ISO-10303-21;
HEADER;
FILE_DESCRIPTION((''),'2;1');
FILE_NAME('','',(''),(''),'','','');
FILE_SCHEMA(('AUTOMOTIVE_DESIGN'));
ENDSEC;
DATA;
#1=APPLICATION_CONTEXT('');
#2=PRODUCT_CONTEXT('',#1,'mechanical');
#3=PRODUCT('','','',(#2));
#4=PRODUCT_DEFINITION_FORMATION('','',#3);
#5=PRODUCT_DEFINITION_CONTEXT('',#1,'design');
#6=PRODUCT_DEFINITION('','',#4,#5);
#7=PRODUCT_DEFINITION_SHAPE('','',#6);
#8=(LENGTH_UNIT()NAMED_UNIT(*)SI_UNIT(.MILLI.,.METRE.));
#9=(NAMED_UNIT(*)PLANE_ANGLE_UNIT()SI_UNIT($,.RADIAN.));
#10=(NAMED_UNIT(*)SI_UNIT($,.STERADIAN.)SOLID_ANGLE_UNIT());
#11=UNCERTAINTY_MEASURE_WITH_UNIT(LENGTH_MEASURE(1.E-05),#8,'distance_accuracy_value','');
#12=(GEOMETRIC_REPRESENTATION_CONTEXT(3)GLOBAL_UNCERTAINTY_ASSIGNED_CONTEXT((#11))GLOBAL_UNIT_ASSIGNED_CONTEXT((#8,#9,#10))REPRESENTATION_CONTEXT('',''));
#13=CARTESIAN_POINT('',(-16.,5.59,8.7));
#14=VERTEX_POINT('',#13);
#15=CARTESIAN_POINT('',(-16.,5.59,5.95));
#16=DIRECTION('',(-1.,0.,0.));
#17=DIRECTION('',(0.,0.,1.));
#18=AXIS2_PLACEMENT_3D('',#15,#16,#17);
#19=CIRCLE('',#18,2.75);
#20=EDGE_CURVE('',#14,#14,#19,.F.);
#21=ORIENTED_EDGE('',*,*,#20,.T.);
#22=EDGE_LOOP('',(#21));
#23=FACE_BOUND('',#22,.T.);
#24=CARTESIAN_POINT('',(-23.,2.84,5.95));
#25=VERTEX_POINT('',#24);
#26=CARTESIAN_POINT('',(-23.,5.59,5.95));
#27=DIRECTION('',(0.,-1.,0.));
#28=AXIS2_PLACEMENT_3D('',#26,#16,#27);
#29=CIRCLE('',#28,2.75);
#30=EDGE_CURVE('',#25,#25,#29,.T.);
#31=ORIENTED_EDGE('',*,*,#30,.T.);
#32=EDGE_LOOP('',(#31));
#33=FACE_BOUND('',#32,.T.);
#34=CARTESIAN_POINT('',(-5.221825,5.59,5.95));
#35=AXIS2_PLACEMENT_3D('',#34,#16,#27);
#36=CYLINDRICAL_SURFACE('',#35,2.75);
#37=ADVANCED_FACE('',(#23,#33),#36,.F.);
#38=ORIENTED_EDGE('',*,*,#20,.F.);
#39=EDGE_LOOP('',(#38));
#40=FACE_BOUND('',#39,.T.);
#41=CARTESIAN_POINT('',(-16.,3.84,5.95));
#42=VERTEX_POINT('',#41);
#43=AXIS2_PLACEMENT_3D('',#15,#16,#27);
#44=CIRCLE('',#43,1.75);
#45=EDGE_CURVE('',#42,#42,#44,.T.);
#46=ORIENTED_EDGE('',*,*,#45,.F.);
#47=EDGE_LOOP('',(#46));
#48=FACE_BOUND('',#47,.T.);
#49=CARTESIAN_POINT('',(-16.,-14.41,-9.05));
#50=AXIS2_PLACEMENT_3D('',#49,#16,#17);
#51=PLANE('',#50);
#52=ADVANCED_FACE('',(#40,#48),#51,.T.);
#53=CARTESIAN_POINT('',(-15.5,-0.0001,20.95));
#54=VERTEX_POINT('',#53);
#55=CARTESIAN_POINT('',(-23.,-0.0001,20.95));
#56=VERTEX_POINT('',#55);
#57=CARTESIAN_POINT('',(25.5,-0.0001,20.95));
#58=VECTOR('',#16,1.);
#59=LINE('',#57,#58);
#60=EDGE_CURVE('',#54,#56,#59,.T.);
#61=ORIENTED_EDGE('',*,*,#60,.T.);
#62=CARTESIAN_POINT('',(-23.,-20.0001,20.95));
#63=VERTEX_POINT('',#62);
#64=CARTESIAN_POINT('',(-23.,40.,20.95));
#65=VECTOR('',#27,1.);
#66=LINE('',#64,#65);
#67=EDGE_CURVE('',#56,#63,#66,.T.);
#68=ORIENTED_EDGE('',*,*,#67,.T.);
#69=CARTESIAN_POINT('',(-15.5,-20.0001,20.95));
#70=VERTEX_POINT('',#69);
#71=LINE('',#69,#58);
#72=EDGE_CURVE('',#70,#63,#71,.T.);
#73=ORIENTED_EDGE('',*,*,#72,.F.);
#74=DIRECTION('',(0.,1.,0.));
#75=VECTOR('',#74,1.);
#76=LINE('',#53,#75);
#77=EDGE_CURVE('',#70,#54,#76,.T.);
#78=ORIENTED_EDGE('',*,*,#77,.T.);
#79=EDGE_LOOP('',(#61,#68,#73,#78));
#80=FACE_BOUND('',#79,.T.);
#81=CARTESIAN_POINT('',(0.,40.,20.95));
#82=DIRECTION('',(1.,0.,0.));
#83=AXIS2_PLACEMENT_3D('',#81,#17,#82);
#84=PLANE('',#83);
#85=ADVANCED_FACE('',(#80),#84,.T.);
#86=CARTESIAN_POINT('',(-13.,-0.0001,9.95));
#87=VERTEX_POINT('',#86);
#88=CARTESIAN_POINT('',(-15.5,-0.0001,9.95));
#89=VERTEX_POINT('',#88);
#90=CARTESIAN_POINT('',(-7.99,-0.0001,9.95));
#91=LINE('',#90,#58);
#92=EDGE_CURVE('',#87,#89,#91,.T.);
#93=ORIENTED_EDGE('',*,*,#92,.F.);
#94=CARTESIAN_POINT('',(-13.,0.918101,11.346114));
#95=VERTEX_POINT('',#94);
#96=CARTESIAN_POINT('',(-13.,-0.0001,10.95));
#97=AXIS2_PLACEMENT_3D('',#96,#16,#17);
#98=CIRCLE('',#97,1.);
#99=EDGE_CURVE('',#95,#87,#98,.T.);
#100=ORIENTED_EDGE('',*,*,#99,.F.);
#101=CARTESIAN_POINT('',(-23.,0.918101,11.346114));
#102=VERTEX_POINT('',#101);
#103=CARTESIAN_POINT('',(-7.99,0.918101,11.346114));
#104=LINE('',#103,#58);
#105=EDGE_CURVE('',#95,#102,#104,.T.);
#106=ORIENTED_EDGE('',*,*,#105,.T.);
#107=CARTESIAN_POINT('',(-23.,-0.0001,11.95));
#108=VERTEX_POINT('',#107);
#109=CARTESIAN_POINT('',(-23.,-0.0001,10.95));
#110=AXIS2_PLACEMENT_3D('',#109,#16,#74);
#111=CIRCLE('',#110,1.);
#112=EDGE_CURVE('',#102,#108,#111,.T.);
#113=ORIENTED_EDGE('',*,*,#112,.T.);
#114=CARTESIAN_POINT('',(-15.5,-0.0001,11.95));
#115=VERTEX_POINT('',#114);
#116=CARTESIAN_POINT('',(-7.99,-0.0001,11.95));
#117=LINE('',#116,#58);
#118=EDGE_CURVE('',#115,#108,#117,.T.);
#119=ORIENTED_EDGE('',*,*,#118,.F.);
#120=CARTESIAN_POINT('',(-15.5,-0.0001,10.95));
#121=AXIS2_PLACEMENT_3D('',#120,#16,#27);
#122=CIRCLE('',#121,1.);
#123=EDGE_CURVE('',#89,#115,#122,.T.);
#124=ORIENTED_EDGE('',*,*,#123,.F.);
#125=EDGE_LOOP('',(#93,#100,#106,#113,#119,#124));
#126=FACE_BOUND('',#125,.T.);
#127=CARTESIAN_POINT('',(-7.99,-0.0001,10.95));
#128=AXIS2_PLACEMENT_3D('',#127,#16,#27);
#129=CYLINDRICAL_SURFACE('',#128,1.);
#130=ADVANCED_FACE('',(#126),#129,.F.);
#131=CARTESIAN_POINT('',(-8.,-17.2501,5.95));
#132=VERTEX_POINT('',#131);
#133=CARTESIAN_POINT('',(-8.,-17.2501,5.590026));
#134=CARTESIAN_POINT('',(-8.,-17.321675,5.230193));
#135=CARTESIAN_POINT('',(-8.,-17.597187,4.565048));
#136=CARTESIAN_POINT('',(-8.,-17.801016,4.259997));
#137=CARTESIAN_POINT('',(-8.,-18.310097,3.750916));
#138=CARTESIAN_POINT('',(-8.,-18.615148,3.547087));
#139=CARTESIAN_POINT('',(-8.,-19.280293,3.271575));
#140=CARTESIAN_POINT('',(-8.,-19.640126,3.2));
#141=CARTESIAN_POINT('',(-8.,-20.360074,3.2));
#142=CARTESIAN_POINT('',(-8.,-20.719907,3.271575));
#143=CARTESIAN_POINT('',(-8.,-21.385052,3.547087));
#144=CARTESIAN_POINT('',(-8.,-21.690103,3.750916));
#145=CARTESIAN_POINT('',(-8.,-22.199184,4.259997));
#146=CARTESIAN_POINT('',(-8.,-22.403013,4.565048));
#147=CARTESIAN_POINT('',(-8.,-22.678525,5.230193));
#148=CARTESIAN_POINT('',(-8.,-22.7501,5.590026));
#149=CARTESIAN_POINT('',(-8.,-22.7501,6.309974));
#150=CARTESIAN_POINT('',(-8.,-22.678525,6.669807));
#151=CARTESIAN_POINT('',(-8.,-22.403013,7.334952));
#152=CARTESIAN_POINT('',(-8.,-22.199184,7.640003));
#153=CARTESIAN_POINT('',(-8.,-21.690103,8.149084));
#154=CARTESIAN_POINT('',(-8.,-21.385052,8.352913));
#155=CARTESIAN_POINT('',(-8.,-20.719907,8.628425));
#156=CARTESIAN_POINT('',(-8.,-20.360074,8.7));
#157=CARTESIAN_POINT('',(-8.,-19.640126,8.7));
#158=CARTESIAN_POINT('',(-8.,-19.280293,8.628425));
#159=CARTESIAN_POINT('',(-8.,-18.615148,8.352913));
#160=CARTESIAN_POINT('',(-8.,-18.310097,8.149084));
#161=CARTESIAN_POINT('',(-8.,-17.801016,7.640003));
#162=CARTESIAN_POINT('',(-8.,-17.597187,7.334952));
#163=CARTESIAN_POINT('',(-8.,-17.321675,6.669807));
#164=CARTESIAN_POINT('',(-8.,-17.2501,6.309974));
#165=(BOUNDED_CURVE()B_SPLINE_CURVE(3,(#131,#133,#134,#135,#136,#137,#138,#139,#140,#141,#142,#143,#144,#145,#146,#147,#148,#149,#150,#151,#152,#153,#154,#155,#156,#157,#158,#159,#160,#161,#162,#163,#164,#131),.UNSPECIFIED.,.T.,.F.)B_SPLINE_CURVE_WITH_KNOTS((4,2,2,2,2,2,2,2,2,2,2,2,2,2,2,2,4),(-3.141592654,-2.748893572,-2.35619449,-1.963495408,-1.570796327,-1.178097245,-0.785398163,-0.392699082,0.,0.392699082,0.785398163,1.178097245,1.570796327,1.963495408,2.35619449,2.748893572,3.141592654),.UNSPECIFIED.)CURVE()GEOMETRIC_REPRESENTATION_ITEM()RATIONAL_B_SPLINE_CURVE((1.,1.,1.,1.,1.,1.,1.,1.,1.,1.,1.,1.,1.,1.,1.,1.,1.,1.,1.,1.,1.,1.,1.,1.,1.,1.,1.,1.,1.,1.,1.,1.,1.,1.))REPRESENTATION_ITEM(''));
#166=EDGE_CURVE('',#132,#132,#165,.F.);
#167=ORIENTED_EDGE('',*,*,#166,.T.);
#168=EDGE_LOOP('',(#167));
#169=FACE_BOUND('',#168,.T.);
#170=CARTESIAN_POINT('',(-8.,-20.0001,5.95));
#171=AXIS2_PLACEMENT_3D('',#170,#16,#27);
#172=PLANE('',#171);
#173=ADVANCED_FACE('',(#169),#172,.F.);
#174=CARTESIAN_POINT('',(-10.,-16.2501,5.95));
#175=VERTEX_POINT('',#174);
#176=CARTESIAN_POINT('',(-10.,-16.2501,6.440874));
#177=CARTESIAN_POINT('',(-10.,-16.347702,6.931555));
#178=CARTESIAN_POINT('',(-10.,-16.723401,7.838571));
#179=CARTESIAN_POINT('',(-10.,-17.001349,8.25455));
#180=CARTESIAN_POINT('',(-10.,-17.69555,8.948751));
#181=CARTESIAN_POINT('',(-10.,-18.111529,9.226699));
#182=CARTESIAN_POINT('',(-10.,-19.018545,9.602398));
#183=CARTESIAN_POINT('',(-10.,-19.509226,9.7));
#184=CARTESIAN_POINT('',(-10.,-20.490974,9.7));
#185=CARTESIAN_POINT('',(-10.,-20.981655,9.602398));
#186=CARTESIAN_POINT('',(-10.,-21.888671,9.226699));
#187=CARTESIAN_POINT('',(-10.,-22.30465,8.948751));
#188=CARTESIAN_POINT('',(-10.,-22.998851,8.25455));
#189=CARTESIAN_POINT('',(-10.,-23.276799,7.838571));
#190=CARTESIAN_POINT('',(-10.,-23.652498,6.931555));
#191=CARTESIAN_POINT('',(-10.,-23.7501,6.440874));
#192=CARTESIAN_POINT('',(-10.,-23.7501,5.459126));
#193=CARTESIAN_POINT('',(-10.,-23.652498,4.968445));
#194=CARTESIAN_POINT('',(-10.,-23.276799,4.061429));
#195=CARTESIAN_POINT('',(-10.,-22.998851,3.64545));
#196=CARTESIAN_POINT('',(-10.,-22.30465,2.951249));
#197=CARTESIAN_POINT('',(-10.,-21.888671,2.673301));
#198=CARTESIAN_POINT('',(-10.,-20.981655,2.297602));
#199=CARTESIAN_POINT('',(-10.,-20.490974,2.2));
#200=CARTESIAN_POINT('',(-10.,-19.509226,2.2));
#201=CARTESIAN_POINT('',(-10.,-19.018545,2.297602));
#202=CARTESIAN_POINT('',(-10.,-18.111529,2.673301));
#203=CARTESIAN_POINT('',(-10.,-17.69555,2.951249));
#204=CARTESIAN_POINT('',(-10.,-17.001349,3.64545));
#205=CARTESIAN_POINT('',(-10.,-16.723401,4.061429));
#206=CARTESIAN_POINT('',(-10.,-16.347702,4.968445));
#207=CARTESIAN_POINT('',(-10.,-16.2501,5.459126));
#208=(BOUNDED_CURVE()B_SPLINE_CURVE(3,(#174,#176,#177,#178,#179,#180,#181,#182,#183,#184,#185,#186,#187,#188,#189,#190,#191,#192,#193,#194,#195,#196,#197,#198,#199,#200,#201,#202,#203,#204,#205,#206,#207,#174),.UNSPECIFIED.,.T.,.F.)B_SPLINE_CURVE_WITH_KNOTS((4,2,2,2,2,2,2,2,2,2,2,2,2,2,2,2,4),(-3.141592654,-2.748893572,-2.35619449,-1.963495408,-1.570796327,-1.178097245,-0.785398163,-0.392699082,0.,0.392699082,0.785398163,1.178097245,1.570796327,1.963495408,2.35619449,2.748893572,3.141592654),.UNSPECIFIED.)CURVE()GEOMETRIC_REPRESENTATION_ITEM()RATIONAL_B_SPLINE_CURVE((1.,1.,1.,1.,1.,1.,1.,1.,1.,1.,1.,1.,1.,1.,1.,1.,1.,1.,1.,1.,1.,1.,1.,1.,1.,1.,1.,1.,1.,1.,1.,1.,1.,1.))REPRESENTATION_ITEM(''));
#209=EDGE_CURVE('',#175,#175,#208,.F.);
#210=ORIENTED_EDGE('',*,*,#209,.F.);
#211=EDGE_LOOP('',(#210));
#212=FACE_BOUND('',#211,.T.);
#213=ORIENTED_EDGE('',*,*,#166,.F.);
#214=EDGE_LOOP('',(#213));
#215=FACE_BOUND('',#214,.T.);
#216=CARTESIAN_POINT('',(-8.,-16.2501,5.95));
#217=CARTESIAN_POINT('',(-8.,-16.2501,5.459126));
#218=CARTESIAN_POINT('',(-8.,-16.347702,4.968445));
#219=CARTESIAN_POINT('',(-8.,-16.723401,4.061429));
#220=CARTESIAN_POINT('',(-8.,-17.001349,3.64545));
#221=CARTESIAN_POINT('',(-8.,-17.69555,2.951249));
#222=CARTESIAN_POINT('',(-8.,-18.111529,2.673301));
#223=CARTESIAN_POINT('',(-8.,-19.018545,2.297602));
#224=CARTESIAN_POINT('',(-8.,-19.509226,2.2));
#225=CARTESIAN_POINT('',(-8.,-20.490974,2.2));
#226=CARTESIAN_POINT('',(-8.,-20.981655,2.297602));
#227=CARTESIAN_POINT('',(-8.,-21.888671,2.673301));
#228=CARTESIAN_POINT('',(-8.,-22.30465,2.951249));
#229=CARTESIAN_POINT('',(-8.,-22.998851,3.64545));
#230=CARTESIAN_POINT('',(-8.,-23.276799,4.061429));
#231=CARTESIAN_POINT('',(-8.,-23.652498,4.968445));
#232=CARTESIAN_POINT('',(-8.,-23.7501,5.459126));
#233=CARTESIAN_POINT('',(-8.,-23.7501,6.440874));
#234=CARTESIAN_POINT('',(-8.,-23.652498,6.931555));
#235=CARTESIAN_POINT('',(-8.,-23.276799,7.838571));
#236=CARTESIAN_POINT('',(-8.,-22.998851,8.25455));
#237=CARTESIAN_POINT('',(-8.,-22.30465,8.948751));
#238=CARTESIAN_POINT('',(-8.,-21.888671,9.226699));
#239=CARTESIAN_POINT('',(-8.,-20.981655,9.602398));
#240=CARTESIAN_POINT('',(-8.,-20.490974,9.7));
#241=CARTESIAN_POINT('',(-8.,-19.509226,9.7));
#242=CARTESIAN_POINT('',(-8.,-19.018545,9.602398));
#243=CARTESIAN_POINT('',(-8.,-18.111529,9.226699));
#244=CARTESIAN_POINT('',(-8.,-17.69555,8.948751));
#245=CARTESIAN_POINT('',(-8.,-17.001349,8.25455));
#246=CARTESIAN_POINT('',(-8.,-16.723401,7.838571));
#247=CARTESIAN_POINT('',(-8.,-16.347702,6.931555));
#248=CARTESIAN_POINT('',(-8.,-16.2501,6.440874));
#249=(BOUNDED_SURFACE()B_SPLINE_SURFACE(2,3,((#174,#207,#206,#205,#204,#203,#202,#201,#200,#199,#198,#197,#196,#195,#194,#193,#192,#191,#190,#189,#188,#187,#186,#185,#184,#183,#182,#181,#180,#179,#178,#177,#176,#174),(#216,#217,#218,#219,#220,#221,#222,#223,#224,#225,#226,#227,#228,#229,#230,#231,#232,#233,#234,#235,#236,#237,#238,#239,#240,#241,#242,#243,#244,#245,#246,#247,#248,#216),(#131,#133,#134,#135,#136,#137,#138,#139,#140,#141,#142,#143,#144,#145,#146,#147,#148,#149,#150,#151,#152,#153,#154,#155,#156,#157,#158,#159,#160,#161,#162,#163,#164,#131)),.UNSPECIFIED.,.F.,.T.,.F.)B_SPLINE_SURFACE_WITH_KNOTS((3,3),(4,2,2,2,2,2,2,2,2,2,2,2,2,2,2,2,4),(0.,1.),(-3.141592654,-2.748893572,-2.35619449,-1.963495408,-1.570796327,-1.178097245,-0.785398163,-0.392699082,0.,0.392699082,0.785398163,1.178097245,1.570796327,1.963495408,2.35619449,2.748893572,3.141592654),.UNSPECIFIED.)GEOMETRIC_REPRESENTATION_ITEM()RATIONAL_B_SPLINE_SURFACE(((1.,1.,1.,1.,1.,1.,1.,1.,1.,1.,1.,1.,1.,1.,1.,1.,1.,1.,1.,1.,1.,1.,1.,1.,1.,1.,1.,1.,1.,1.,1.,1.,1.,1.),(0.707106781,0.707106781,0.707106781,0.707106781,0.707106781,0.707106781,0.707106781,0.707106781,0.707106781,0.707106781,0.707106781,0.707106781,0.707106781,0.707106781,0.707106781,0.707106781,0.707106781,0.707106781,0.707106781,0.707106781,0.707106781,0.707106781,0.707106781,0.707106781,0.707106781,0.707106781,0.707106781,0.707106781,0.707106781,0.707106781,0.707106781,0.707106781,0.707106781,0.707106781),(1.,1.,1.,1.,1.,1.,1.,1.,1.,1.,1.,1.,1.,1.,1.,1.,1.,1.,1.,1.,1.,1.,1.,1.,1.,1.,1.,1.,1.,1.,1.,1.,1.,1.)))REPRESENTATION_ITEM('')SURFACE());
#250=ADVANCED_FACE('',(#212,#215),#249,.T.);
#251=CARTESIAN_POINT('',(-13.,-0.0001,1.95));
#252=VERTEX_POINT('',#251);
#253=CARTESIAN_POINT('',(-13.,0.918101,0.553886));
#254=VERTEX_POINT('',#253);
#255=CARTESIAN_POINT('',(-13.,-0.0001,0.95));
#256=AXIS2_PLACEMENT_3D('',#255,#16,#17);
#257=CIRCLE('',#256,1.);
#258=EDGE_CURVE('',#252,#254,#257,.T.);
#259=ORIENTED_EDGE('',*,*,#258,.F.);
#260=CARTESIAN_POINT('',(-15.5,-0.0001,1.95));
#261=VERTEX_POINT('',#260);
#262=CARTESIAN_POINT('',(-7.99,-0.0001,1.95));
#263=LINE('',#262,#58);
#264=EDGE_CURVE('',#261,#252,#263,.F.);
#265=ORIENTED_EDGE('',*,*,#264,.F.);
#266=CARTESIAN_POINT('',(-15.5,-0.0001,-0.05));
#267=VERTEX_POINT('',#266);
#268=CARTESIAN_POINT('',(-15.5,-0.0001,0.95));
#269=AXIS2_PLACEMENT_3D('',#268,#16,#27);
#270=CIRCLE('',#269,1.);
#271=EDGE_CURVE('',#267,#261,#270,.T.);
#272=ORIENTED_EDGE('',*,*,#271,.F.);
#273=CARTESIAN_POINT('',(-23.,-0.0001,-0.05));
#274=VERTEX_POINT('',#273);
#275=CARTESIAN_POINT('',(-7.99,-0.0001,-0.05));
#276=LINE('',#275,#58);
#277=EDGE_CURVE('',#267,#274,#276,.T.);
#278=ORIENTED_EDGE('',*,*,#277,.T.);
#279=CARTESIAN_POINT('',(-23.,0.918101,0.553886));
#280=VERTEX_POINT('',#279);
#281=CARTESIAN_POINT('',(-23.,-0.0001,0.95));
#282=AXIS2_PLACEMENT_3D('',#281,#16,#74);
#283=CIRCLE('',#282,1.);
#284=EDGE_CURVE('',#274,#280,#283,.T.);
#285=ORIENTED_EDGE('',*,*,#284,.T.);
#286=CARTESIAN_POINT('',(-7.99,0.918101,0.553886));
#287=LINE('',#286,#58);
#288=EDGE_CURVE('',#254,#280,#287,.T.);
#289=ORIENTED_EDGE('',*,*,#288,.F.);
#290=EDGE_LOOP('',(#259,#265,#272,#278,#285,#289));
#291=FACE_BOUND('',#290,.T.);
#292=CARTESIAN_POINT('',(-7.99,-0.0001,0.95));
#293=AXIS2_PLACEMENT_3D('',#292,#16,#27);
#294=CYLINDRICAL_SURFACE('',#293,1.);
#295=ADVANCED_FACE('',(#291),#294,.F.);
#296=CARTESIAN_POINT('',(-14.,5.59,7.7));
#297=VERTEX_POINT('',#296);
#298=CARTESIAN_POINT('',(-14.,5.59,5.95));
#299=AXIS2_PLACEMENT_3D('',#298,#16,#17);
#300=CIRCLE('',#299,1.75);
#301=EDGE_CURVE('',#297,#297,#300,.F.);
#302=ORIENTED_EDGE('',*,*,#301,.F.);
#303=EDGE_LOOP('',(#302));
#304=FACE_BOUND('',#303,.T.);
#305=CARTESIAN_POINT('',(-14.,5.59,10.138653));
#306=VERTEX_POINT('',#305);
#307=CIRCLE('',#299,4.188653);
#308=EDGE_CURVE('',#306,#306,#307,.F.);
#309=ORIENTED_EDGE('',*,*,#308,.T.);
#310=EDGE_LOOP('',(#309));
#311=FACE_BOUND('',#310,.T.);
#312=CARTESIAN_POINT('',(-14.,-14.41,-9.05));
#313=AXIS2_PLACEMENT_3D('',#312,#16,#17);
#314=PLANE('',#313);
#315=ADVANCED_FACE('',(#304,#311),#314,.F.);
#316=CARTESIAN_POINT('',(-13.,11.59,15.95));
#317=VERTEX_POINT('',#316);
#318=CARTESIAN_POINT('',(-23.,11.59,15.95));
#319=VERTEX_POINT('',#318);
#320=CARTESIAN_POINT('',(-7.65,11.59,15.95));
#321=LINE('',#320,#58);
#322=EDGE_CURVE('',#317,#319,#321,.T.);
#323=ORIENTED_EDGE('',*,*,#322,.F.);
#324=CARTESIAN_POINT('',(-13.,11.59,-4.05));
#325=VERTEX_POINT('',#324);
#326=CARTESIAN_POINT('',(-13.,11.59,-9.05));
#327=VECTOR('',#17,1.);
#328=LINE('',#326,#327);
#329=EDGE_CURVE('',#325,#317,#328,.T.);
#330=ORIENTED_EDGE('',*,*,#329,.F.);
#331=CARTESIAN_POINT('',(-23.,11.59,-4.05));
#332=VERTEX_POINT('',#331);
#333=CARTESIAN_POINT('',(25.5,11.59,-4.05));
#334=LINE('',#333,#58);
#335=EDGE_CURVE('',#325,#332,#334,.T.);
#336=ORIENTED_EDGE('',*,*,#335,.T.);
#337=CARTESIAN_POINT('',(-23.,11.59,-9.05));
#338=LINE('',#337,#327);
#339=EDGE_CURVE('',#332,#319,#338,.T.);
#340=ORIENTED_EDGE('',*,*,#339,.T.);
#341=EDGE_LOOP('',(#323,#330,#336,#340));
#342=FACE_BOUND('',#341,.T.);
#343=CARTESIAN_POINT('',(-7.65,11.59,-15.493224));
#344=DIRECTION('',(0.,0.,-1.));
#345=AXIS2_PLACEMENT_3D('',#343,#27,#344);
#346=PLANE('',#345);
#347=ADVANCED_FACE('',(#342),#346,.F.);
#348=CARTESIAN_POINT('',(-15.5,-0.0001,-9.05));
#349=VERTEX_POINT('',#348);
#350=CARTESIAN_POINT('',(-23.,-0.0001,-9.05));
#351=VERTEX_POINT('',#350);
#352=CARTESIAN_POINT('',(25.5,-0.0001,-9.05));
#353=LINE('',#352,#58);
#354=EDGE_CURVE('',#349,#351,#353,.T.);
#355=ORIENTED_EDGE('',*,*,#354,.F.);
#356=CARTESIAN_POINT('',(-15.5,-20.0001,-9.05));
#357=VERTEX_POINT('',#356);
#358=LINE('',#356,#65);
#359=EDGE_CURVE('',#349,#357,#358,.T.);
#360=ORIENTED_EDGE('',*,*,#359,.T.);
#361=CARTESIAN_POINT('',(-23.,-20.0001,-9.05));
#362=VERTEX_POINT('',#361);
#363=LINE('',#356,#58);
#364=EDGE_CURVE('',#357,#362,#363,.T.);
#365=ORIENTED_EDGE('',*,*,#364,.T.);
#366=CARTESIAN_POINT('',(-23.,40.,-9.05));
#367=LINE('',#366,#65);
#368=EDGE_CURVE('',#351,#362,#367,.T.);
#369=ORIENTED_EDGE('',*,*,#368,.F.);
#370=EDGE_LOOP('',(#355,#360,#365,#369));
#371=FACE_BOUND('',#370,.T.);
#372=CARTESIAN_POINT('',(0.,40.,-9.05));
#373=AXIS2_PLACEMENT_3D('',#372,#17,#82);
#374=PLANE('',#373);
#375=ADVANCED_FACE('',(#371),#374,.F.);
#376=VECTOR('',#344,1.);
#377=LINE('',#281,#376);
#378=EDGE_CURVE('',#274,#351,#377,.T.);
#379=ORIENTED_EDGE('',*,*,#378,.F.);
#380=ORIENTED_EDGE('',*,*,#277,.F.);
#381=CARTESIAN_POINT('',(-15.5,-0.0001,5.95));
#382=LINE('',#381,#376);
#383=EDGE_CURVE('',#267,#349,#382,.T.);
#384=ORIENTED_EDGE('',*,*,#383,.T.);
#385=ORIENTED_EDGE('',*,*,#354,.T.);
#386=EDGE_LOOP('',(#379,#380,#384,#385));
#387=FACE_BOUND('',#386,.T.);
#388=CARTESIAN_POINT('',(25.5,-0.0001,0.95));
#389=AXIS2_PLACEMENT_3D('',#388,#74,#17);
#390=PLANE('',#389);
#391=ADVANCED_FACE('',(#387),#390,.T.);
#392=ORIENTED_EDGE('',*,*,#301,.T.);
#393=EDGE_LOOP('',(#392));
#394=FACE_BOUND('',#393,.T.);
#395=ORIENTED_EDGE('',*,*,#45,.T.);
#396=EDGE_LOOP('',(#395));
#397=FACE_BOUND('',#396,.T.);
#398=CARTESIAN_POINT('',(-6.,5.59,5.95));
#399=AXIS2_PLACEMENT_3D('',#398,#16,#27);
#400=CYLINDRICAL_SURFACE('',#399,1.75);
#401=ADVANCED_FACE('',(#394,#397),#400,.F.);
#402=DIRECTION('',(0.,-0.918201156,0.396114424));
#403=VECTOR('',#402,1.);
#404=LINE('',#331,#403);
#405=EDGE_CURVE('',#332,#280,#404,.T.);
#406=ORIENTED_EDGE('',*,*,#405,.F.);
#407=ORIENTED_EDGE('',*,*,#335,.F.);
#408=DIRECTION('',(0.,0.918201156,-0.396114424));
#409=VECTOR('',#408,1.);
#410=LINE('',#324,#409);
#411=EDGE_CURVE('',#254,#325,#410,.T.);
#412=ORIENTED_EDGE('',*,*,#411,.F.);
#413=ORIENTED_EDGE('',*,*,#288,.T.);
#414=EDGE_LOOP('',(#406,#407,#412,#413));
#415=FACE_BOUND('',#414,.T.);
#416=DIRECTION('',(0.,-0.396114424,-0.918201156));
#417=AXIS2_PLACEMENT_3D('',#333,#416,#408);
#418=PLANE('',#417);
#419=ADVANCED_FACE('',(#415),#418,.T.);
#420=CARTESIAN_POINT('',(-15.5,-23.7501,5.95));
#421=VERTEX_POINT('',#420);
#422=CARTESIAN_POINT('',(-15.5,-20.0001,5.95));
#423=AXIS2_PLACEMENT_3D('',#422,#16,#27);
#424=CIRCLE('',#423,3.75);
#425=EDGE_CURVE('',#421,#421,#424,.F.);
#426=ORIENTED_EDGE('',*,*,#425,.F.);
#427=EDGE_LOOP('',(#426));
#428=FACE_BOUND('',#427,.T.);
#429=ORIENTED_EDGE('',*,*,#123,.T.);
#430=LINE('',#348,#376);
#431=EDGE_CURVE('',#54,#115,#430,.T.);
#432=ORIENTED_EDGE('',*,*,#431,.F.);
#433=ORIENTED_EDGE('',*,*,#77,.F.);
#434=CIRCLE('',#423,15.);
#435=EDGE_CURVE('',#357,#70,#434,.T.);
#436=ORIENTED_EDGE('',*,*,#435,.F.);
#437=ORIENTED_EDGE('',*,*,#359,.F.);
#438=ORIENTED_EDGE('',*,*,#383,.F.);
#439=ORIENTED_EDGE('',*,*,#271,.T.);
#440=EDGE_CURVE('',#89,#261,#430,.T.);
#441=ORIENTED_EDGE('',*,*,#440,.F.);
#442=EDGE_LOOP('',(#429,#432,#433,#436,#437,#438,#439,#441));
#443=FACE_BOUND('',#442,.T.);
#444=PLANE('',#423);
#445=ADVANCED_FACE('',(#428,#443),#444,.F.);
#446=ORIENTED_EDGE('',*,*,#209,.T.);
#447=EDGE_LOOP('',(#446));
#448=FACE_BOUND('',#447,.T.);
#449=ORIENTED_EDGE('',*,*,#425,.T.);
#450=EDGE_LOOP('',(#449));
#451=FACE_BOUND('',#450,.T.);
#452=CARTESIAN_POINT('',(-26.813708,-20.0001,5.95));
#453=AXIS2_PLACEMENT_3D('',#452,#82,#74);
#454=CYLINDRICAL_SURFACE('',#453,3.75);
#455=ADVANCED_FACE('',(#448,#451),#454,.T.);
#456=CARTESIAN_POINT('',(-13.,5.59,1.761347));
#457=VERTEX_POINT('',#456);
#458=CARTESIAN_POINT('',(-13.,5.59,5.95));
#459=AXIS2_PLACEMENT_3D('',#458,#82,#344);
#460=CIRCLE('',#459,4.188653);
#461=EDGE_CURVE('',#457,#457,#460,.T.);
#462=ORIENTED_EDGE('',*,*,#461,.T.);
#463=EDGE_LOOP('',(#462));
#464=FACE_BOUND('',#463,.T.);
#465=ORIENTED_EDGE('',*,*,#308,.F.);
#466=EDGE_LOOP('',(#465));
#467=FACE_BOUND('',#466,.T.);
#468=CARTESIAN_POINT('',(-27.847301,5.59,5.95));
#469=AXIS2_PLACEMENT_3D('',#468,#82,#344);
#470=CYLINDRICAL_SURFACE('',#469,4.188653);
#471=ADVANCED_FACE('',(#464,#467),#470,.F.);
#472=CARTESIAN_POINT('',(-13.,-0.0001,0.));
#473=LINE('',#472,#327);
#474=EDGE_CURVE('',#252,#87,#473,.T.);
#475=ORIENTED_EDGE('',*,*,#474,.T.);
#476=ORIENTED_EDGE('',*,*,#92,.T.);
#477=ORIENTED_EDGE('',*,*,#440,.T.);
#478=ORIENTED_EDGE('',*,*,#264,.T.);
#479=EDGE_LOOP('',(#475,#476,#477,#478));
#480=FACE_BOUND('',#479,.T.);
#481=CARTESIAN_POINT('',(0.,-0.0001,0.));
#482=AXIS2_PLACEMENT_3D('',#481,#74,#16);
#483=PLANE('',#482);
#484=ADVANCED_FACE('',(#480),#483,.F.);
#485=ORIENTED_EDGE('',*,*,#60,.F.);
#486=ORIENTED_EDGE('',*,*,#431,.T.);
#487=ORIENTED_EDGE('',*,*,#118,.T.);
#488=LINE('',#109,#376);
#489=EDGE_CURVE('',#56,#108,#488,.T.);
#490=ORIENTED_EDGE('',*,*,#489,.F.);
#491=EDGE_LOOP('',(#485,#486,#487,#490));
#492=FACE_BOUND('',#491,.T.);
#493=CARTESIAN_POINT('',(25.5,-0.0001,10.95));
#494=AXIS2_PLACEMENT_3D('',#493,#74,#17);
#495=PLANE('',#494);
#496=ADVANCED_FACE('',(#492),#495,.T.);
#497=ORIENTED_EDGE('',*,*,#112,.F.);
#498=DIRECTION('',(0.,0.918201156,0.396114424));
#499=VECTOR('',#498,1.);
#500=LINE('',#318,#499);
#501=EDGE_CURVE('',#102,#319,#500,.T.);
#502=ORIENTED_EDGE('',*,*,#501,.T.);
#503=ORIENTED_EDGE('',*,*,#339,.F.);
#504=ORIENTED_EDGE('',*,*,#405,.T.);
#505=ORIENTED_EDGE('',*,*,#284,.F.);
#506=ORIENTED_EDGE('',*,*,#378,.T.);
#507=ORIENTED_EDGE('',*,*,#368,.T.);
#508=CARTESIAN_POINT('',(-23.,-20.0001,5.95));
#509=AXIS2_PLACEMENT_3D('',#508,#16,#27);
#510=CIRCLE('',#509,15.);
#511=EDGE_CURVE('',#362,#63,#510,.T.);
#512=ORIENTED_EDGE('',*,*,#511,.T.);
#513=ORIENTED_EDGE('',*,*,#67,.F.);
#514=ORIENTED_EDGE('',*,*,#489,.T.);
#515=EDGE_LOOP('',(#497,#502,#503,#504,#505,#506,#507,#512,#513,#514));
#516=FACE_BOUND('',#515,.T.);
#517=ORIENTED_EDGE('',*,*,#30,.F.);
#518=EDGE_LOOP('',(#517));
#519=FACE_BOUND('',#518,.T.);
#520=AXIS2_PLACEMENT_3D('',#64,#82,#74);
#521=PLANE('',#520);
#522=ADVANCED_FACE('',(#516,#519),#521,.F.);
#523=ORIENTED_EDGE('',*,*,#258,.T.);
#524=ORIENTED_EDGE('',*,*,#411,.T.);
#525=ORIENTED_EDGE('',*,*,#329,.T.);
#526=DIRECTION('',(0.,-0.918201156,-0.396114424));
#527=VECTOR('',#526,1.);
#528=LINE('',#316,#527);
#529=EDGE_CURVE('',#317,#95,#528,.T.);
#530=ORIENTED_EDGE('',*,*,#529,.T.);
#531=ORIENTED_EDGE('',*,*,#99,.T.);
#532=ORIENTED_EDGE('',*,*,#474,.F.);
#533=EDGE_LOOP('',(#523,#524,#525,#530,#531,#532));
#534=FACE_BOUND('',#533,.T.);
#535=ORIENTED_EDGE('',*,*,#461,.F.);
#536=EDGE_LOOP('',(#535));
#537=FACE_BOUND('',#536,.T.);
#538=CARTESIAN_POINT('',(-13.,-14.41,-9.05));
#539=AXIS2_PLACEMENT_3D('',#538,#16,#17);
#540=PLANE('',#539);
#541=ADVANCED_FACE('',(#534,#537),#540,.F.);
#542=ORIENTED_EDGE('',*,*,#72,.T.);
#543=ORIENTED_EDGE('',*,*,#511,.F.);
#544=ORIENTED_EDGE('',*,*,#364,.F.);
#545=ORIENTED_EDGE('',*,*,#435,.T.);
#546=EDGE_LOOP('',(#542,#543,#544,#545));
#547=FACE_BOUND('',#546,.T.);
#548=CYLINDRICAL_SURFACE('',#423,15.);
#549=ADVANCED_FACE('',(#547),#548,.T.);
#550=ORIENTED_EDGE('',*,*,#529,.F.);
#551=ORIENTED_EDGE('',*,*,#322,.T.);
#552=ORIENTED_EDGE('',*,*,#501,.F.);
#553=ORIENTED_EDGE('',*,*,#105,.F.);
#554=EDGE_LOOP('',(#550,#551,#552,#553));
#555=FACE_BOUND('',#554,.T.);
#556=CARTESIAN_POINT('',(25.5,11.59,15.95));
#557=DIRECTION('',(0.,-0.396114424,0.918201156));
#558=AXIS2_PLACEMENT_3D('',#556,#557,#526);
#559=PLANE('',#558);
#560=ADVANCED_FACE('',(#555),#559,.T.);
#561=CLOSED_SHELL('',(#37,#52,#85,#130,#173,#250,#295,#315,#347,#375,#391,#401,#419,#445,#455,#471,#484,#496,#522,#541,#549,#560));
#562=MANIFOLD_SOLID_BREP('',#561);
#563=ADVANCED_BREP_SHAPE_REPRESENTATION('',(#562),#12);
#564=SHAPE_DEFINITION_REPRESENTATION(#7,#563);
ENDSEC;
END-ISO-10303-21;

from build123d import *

# Parameters (mm, degrees)
BOSS_EXTRUDE1_DEPTH     = 20.95
BOSS_EXTRUDE2_START     = -9.05
BOSS_EXTRUDE2_DEPTH     = 9.05
SKETCH6_R               = 2
CUT_EXTRUDE2_DEPTH      = 10
CUT_EXTRUDE3_DEPTH      = 2.75
CUT_EXTRUDE4_DEPTH      = 67.499081444
CUT_EXTRUDE4_DEPTH_BACK = 67.499081444
SKETCH8_W               = 8.290514233
SKETCH8_H               = 3.25
SKETCH11_R              = 11.15
BEARING_HOLE_DEPTH      = 7.3
SKETCH9_W               = 12.3
SKETCH9_H               = 21.5
WIRE_HOLE_DEPTH         = 62.274898109
SKETCH12_W              = 46
SKETCH12_H              = 30
BOSS_EXTRUDE3_DEPTH     = 0.0001
BOSS_EXTRUDE4_DEPTH     = 7.5
BOSS_EXTRUDE5_START     = -7.5
BOSS_EXTRUDE5_DEPTH     = 7.5
BOSS_EXTRUDE9_START     = 2.5
BOSS_EXTRUDE9_DEPTH     = 2.5
SKETCH15_R              = 4
CUT_EXTRUDE5_DEPTH      = 77.054456365
SKETCH17_R              = 6.169612062
BOSS_EXTRUDE6_DEPTH     = 10
SKETCH18_R              = 4
KNUB_DEPTH              = 15
SKETCH19_R              = 4.675
CUT_EXTRUDE6_DEPTH      = 2
SKETCH24_R              = 4.5
CUT_EXTRUDE7_DEPTH      = 65.487733972
FILLET1_R               = 0.5
SKETCH25_W              = 8.843315878
SKETCH25_H              = 4.834346013
BOSS_EXTRUDE10_DEPTH    = 2
SKETCH27_W              = 12.3
SKETCH27_H              = 21.5
CUT_EXTRUDE8_DEPTH      = 60.56786481
BOSS_EXTRUDE11_DEPTH    = 14.5901
CUT_EXTRUDE9_REACH      = 69.405
SKETCH29_W              = 15.2
SKETCH29_H              = 3
SKETCH30_W              = 30
SKETCH30_H              = 43.119485767
CUT_EXTRUDE10_DEPTH     = 77.054456365
SKETCH31_W              = 44.37652795
SKETCH31_H              = 54.474735771
CUT_EXTRUDE12_DEPTH     = 64.373176502
SKETCH32_W              = 38.5
SKETCH32_H              = 30
CUT_EXTRUDE13_DEPTH     = 26
SKETCH39_W              = 19.135999949
SKETCH39_H              = 39.276229487
CUT_EXTRUDE18_DEPTH     = 43.013717998
SKETCH33_R              = 2.75
CUT_EXTRUDE14_DEPTH     = 7
SKETCH34_R              = 1.75
CUT_EXTRUDE15_DEPTH     = 10
SKETCH37_R              = 4.188653381
CUT_EXTRUDE17_DEPTH     = 1
SKETCH40_R              = 4
SKETCH40_R_2            = 3.75
CUT_EXTRUDE19_DEPTH     = 7.5
FILLET4_SIZE            = 2
FILLET4_SIZE_2          = 1
CUT_EXTRUDE20_DEPTH     = 44.461586522


with BuildPart() as part:
    # Sketch2 → Boss-Extrude1 (new body)
    with BuildSketch(Plane.XY):
        with BuildLine():
            Line((-14.709485767, 40), (-23, 40))
            Line((-23, 40), (-23, 0))
            Line((-23, 0), (23, 0))
            Line((23, 0), (23, 40))
            Line((23, 40), (14.709485767, 40))
            ThreePointArc((14.709485767, 40), (0, 54.709485767), (-14.709485767, 40))
        make_face()
        with BuildLine():
            Line((-7.65, 18.18111404), (-7.65, 14.59))
            Line((-7.65, 14.59), (7.65, 14.59))
            Line((7.65, 14.59), (7.65, 18.18111404))
            Line((7.65, 18.18111404), (9.45, 18.18111404))
            Line((9.45, 18.18111404), (9.45, 21.20025831))
            ThreePointArc((9.45, 21.20025831), (0, 46.349332344), (-9.45, 21.20025831))
            Line((-9.45, 21.20025831), (-9.45, 18.18111404))
            Line((-9.45, 18.18111404), (-7.65, 18.18111404))
        make_face(mode=Mode.SUBTRACT)
    extrude(amount=BOSS_EXTRUDE1_DEPTH)

    # Sketch3 → Boss-Extrude2 (add)
    with BuildSketch(Plane.XY.offset(BOSS_EXTRUDE2_START)):
        with BuildLine():
            Line((-14.709485767, 40), (-23, 40))
            Line((-23, 40), (-23, 0))
            Line((-23, 0), (23, 0))
            Line((23, 0), (23, 40))
            Line((23, 40), (14.709485767, 40))
            ThreePointArc((14.709485767, 40), (0, 54.709485767), (-14.709485767, 40))
        make_face()
    extrude(amount=BOSS_EXTRUDE2_DEPTH)

    # Sketch6 → Cut-Extrude2 (cut)
    with BuildSketch(Plane.XY.offset(20.95)):
        with Locations((-17.5, 32)):
            Circle(SKETCH6_R)
        with Locations((17.5, 32)):
            Circle(SKETCH6_R)
    extrude(amount=-CUT_EXTRUDE2_DEPTH, mode=Mode.SUBTRACT)

    # Sketch7 → Cut-Extrude3 (cut)
    with BuildSketch(Plane.XY.offset(20.95)):
        with BuildLine():
            Line((-17.5, 35.75), (17.5, 35.75))
            ThreePointArc((17.5, 35.75), (21.25, 32), (17.5, 28.25))
            Line((17.5, 28.25), (-17.5, 28.25))
            ThreePointArc((-17.5, 28.25), (-21.25, 32), (-17.5, 35.75))
        make_face()
    extrude(amount=-CUT_EXTRUDE3_DEPTH, mode=Mode.SUBTRACT)

    # Sketch8 → Cut-Extrude4 (cut, two sides: drawn at the far end of the back side and taken through both)
    with BuildSketch(Plane.XY.offset(20.95).offset(-CUT_EXTRUDE4_DEPTH_BACK)):
        with Locations((-18.854742884, 38.375)):
            Rectangle(SKETCH8_W, SKETCH8_H)
        with Locations((18.854742884, 38.375)):
            Rectangle(SKETCH8_W, SKETCH8_H)
    extrude(amount=CUT_EXTRUDE4_DEPTH + CUT_EXTRUDE4_DEPTH_BACK, mode=Mode.SUBTRACT)

    # Sketch11 → Bearing Hole (cut)
    with BuildSketch(Plane(origin=(0, 0, -9.05), x_dir=(-1, 0, 0), z_dir=(0, 0, -1))):
        with Locations((0, 40)):
            Circle(SKETCH11_R)
    extrude(amount=-BEARING_HOLE_DEPTH, mode=Mode.SUBTRACT)

    # Sketch9 → Wire Hole (cut, through all)
    with BuildSketch(Plane(origin=(0, 14.59, -19.25), x_dir=(-1, 0, 0), z_dir=(0, 1, 0))):
        with Locations((0, 26.95)):
            Rectangle(SKETCH9_W, SKETCH9_H)
    extrude(amount=-WIRE_HOLE_DEPTH, mode=Mode.SUBTRACT)

    # Sketch12 → Boss-Extrude3 (add)
    with BuildSketch(Plane.XZ):
        with Locations((0, 5.95)):
            Rectangle(SKETCH12_W, SKETCH12_H)
    extrude(amount=BOSS_EXTRUDE3_DEPTH)

    # Sketch13 → Boss-Extrude4 (add)
    with BuildSketch(Plane(origin=(23, 0, 0), x_dir=(0, 0, -1), z_dir=(1, 0, 0))):
        with BuildLine():
            Line((-20.95, -0.0001), (-20.95, -20.0001))
            ThreePointArc((-20.95, -20.0001), (-5.95, -35.0001), (9.05, -20.0001))
            Line((9.05, -20.0001), (9.05, -0.0001))
            Line((9.05, -0.0001), (-20.95, -0.0001))
        make_face()
    extrude(amount=-BOSS_EXTRUDE4_DEPTH)

    # Sketch14 → Boss-Extrude5 (add)
    with BuildSketch(Plane.ZY.offset(23).offset(BOSS_EXTRUDE5_START)):
        with BuildLine():
            Line((-9.05, -20.0001), (-9.05, -0.0001))
            Line((-9.05, -0.0001), (20.95, -0.0001))
            Line((20.95, -0.0001), (20.95, -20.0001))
            ThreePointArc((20.95, -20.0001), (5.95, -35.0001), (-9.05, -20.0001))
        make_face()
    extrude(amount=BOSS_EXTRUDE5_DEPTH)

    # Sketch21 → Boss-Extrude9 (add)
    with BuildSketch(Plane(origin=(23, 0, 0), x_dir=(0, 0, -1), z_dir=(1, 0, 0)).offset(BOSS_EXTRUDE9_START)):
        with BuildLine():
            Line((-20.95, -20.0001), (-20.95, 36.75))
            Line((-20.95, 36.75), (9.05, 36.75))
            Line((9.05, 36.75), (9.05, -20.0001))
            ThreePointArc((9.05, -20.0001), (-5.95, -35.0001), (-20.95, -20.0001))
        make_face()
    extrude(amount=-BOSS_EXTRUDE9_DEPTH)

    # Sketch15 → Cut-Extrude5 (cut, through all)
    with BuildSketch(Plane.ZY.offset(23)):
        with Locations(Location((5.95, -20.0001, 0), (0, 0, 270))):
            Circle(SKETCH15_R)
    extrude(amount=-CUT_EXTRUDE5_DEPTH, mode=Mode.SUBTRACT)

    # Sketch17 → Boss-Extrude6 (add)
    with BuildSketch(Plane(origin=(25.5, 0, -23), x_dir=(0, 0, 1), z_dir=(-1, 0, 0))):
        with Locations((28.95, -20.0001)):
            Circle(SKETCH17_R)
        with BuildLine():
            Line((26.765394773, -18.5001), (31.134605227, -18.5001))
            ThreePointArc((31.134605227, -18.5001), (31.6, -20.0001), (31.134605227, -21.5001))
            Line((31.134605227, -21.5001), (26.765394773, -21.5001))
            ThreePointArc((26.765394773, -21.5001), (26.3, -20.0001), (26.765394773, -18.5001))
        make_face(mode=Mode.SUBTRACT)
    extrude(amount=BOSS_EXTRUDE6_DEPTH)

    # Sketch18 → Knub (add)
    with BuildSketch(Plane.ZY.offset(23)):
        with Locations(Location((5.95, -20.0001, 0), (0, 0, 270))):
            Circle(SKETCH18_R)
    extrude(amount=-KNUB_DEPTH)

    # Sketch19 → Cut-Extrude6 (cut)
    with BuildSketch(Plane.ZY.offset(-15.5)):
        with Locations((5.95, -20.0001)):
            Circle(SKETCH19_R)
    extrude(amount=-CUT_EXTRUDE6_DEPTH, mode=Mode.SUBTRACT)

    # Sketch24 → Cut-Extrude7 (cut, through all)
    with BuildSketch(Plane(origin=(0, 0, -1.75), x_dir=(-1, 0, 0), z_dir=(0, 0, -1))):
        with Locations((0, 40)):
            Circle(SKETCH24_R)
    extrude(amount=-CUT_EXTRUDE7_DEPTH, mode=Mode.SUBTRACT)

    # Fillet1
    fillet1_edges = [part.edges().sort_by_distance(p)[0] for p in [
        (11.15, 40, -9.05),
    ]]
    fillet(fillet1_edges, radius=FILLET1_R)

    # Sketch25 → Boss-Extrude10 (add)
    with BuildSketch(Plane(origin=(25.5, 0, 0), x_dir=(0, 0, -1), z_dir=(1, 0, 0))):
        with Locations((-6.185865257, -20.38943492)):
            Rectangle(SKETCH25_W, SKETCH25_H)
    extrude(amount=-BOSS_EXTRUDE10_DEPTH)

    # Sketch27 → Cut-Extrude8 (cut, through all)
    with BuildSketch(Plane(origin=(0, 14.59, 0), x_dir=(1, 0, 0), z_dir=(0, 1, 0))):
        with Locations((0, -7.7)):
            Rectangle(SKETCH27_W, SKETCH27_H)
    extrude(amount=-CUT_EXTRUDE8_DEPTH, mode=Mode.SUBTRACT)

    # Sketch28 → Boss-Extrude11 (add)
    with BuildSketch(Plane.XZ.offset(0.0001)):
        Polygon((-6.15, 7.7), (0, 17.95), (6.15, 7.7), (6.15, 18.45), (-6.15, 18.45), align=None)
    extrude(amount=-BOSS_EXTRUDE11_DEPTH)

    # Cut-Extrude9: up to this face of the body (flat: up to its plane)
    cut_extrude9_end = Plane(part.part.faces().sort_by_distance((0, 29.679084048, 0))[0])
    # Sketch29 → Cut-Extrude9 (cut, up to the picked face)
    with BuildSketch(Plane.XY.offset(20.95), mode=Mode.PRIVATE) as cut_extrude9_sk1:
        with Locations((-0.05, 13.09)):
            Rectangle(SKETCH29_W, SKETCH29_H)
    cut_extrude9_tool1 = split(extrude(cut_extrude9_sk1.sketch, amount=-CUT_EXTRUDE9_REACH, mode=Mode.PRIVATE), bisect_by=cut_extrude9_end, keep=Keep.BOTH, mode=Mode.PRIVATE)
    add(cut_extrude9_tool1.solids().sort_by(Axis((-0.05, 13.09, 20.95), (0, 0, -1)))[0], mode=Mode.SUBTRACT)

    # Sketch30 → Cut-Extrude10 (cut, through all)
    with BuildSketch(Plane.ZY.offset(23)):
        with Locations((5.95, 33.149742884)):
            Rectangle(SKETCH30_W, SKETCH30_H)
    extrude(amount=-CUT_EXTRUDE10_DEPTH, mode=Mode.SUBTRACT)

    # Sketch31 → Cut-Extrude12 (cut, through all)
    with BuildSketch(Plane.ZY.offset(23)):
        with Locations((5.76471192, -10.040592917)):
            Rectangle(SKETCH31_W, SKETCH31_H)
        with BuildLine():
            Line((-4.05, 11.59), (15.95, 11.59))
            Line((15.95, 11.59), (10.95, -0.0001))
            Line((10.95, -0.0001), (20.95, -0.0001))
            Line((20.95, -0.0001), (20.95, -20.0001))
            ThreePointArc((20.95, -20.0001), (5.95, -35.0001), (-9.05, -20.0001))
            Line((-9.05, -20.0001), (-9.05, -0.0001))
            Line((-9.05, -0.0001), (0.95, -0.0001))
            Line((0.95, -0.0001), (-4.05, 11.59))
        make_face(mode=Mode.SUBTRACT)
    extrude(amount=-CUT_EXTRUDE12_DEPTH, mode=Mode.SUBTRACT)

    # Sketch32 → Cut-Extrude13 (cut)
    with BuildSketch(Plane(origin=(0, 11.59, 0), x_dir=(1, 0, 0), z_dir=(0, 1, 0))):
        with Locations((6.25, -5.95)):
            Rectangle(SKETCH32_W, SKETCH32_H)
    extrude(amount=-CUT_EXTRUDE13_DEPTH, mode=Mode.SUBTRACT)


with BuildPart() as cut_extrude13_piece_1:
    # of the separate pieces the step leaves, piece 1, a body of its own (cut_extrude13_pieces)
    add(part.part.solids().sort_by_distance((-23, -0.0001, 0.95))[0])

    # Sketch33 → Cut-Extrude14 (cut)
    with BuildSketch(Plane.ZY.offset(23)):
        with Locations(Location((5.95, 5.59, 0), (0, 0, 270))):
            Circle(SKETCH33_R)
    extrude(amount=-CUT_EXTRUDE14_DEPTH, mode=Mode.SUBTRACT)

    # Sketch34 → Cut-Extrude15 (cut)
    with BuildSketch(Plane.ZY.offset(16)):
        with Locations(Location((5.95, 5.59, 0), (0, 0, 270))):
            Circle(SKETCH34_R)
    extrude(amount=-CUT_EXTRUDE15_DEPTH, mode=Mode.SUBTRACT)

    # Sketch37 → Cut-Extrude17 (cut)
    with BuildSketch(Plane(origin=(-13, 0, 0), x_dir=(0, 0, -1), z_dir=(1, 0, 0))):
        with Locations((-5.95, 5.59)):
            Circle(SKETCH37_R)
    extrude(amount=-CUT_EXTRUDE17_DEPTH, mode=Mode.SUBTRACT)

    # Sketch40 → Cut-Extrude19 (cut)
    with BuildSketch(Plane(origin=(-8, 0, 0), x_dir=(0, 0, -1), z_dir=(1, 0, 0))):
        with Locations((-5.95, -20.0001)):
            Circle(SKETCH40_R)
        with Locations(Location((-5.95, -20.0001, 0), (0, 0, 90))):
            Circle(SKETCH40_R_2, mode=Mode.SUBTRACT)
    extrude(amount=-CUT_EXTRUDE19_DEPTH, mode=Mode.SUBTRACT)

    # Fillet4
    # an asymmetric fillet: 2, 1 mm, written as the material it takes off along each edge
    with BuildSketch(Plane(origin=(-8, -20.0001, 5.95), x_dir=(0, 1, 0), z_dir=(0, 0, -1))) as fillet4_piece_1:
        with BuildLine():
            Bezier((3.75, -FILLET4_SIZE), (3.75, 0), (3.75 - FILLET4_SIZE_2, 0), weights=[1, 0.707106781, 1])
            Line((3.75 - FILLET4_SIZE_2, 0), (3.75, 0))
            Line((3.75, 0), (3.75, -FILLET4_SIZE))
        make_face()
    revolve(axis=Axis((-8, -20.0001, 5.95), (1, 0, 0)), mode=Mode.SUBTRACT)

    # Sketch41 → Cut-Extrude20 (cut, through all)
    with BuildSketch(Plane.ZY.offset(23)):
        with BuildLine():
            Line((0.553885576, 0.918101156), (0.95, -0.0001))
            Line((0.95, -0.0001), (-0.05, -0.0001))
            ThreePointArc((-0.05, -0.0001), (1.785498182, -0.54959321), (0.553885576, 0.918101156))
        make_face()
        with BuildLine():
            Line((11.346114424, 0.918101156), (10.95, -0.0001))
            Line((10.95, -0.0001), (11.95, -0.0001))
            ThreePointArc((11.95, -0.0001), (10.114501818, -0.54959321), (11.346114424, 0.918101156))
        make_face()
    extrude(amount=-CUT_EXTRUDE20_DEPTH, mode=Mode.SUBTRACT)


with BuildPart() as cut_extrude13_piece_2:
    # of the separate pieces the step leaves, piece 2, a body of its own (cut_extrude13_pieces)
    add(part.part.solids().sort_by_distance((25.5, -14.41, -9.05))[0])

    # Sketch39 → Cut-Extrude18 (cut, through all)
    with BuildSketch(Plane(origin=(0, -14.41, 0), x_dir=(1, 0, 0), z_dir=(0, 1, 0))):
        with Locations((22.531610438, -7.15409506)):
            Rectangle(SKETCH39_W, SKETCH39_H)
    extrude(amount=-CUT_EXTRUDE18_DEPTH, mode=Mode.SUBTRACT)


solid = cut_extrude13_piece_1.part
